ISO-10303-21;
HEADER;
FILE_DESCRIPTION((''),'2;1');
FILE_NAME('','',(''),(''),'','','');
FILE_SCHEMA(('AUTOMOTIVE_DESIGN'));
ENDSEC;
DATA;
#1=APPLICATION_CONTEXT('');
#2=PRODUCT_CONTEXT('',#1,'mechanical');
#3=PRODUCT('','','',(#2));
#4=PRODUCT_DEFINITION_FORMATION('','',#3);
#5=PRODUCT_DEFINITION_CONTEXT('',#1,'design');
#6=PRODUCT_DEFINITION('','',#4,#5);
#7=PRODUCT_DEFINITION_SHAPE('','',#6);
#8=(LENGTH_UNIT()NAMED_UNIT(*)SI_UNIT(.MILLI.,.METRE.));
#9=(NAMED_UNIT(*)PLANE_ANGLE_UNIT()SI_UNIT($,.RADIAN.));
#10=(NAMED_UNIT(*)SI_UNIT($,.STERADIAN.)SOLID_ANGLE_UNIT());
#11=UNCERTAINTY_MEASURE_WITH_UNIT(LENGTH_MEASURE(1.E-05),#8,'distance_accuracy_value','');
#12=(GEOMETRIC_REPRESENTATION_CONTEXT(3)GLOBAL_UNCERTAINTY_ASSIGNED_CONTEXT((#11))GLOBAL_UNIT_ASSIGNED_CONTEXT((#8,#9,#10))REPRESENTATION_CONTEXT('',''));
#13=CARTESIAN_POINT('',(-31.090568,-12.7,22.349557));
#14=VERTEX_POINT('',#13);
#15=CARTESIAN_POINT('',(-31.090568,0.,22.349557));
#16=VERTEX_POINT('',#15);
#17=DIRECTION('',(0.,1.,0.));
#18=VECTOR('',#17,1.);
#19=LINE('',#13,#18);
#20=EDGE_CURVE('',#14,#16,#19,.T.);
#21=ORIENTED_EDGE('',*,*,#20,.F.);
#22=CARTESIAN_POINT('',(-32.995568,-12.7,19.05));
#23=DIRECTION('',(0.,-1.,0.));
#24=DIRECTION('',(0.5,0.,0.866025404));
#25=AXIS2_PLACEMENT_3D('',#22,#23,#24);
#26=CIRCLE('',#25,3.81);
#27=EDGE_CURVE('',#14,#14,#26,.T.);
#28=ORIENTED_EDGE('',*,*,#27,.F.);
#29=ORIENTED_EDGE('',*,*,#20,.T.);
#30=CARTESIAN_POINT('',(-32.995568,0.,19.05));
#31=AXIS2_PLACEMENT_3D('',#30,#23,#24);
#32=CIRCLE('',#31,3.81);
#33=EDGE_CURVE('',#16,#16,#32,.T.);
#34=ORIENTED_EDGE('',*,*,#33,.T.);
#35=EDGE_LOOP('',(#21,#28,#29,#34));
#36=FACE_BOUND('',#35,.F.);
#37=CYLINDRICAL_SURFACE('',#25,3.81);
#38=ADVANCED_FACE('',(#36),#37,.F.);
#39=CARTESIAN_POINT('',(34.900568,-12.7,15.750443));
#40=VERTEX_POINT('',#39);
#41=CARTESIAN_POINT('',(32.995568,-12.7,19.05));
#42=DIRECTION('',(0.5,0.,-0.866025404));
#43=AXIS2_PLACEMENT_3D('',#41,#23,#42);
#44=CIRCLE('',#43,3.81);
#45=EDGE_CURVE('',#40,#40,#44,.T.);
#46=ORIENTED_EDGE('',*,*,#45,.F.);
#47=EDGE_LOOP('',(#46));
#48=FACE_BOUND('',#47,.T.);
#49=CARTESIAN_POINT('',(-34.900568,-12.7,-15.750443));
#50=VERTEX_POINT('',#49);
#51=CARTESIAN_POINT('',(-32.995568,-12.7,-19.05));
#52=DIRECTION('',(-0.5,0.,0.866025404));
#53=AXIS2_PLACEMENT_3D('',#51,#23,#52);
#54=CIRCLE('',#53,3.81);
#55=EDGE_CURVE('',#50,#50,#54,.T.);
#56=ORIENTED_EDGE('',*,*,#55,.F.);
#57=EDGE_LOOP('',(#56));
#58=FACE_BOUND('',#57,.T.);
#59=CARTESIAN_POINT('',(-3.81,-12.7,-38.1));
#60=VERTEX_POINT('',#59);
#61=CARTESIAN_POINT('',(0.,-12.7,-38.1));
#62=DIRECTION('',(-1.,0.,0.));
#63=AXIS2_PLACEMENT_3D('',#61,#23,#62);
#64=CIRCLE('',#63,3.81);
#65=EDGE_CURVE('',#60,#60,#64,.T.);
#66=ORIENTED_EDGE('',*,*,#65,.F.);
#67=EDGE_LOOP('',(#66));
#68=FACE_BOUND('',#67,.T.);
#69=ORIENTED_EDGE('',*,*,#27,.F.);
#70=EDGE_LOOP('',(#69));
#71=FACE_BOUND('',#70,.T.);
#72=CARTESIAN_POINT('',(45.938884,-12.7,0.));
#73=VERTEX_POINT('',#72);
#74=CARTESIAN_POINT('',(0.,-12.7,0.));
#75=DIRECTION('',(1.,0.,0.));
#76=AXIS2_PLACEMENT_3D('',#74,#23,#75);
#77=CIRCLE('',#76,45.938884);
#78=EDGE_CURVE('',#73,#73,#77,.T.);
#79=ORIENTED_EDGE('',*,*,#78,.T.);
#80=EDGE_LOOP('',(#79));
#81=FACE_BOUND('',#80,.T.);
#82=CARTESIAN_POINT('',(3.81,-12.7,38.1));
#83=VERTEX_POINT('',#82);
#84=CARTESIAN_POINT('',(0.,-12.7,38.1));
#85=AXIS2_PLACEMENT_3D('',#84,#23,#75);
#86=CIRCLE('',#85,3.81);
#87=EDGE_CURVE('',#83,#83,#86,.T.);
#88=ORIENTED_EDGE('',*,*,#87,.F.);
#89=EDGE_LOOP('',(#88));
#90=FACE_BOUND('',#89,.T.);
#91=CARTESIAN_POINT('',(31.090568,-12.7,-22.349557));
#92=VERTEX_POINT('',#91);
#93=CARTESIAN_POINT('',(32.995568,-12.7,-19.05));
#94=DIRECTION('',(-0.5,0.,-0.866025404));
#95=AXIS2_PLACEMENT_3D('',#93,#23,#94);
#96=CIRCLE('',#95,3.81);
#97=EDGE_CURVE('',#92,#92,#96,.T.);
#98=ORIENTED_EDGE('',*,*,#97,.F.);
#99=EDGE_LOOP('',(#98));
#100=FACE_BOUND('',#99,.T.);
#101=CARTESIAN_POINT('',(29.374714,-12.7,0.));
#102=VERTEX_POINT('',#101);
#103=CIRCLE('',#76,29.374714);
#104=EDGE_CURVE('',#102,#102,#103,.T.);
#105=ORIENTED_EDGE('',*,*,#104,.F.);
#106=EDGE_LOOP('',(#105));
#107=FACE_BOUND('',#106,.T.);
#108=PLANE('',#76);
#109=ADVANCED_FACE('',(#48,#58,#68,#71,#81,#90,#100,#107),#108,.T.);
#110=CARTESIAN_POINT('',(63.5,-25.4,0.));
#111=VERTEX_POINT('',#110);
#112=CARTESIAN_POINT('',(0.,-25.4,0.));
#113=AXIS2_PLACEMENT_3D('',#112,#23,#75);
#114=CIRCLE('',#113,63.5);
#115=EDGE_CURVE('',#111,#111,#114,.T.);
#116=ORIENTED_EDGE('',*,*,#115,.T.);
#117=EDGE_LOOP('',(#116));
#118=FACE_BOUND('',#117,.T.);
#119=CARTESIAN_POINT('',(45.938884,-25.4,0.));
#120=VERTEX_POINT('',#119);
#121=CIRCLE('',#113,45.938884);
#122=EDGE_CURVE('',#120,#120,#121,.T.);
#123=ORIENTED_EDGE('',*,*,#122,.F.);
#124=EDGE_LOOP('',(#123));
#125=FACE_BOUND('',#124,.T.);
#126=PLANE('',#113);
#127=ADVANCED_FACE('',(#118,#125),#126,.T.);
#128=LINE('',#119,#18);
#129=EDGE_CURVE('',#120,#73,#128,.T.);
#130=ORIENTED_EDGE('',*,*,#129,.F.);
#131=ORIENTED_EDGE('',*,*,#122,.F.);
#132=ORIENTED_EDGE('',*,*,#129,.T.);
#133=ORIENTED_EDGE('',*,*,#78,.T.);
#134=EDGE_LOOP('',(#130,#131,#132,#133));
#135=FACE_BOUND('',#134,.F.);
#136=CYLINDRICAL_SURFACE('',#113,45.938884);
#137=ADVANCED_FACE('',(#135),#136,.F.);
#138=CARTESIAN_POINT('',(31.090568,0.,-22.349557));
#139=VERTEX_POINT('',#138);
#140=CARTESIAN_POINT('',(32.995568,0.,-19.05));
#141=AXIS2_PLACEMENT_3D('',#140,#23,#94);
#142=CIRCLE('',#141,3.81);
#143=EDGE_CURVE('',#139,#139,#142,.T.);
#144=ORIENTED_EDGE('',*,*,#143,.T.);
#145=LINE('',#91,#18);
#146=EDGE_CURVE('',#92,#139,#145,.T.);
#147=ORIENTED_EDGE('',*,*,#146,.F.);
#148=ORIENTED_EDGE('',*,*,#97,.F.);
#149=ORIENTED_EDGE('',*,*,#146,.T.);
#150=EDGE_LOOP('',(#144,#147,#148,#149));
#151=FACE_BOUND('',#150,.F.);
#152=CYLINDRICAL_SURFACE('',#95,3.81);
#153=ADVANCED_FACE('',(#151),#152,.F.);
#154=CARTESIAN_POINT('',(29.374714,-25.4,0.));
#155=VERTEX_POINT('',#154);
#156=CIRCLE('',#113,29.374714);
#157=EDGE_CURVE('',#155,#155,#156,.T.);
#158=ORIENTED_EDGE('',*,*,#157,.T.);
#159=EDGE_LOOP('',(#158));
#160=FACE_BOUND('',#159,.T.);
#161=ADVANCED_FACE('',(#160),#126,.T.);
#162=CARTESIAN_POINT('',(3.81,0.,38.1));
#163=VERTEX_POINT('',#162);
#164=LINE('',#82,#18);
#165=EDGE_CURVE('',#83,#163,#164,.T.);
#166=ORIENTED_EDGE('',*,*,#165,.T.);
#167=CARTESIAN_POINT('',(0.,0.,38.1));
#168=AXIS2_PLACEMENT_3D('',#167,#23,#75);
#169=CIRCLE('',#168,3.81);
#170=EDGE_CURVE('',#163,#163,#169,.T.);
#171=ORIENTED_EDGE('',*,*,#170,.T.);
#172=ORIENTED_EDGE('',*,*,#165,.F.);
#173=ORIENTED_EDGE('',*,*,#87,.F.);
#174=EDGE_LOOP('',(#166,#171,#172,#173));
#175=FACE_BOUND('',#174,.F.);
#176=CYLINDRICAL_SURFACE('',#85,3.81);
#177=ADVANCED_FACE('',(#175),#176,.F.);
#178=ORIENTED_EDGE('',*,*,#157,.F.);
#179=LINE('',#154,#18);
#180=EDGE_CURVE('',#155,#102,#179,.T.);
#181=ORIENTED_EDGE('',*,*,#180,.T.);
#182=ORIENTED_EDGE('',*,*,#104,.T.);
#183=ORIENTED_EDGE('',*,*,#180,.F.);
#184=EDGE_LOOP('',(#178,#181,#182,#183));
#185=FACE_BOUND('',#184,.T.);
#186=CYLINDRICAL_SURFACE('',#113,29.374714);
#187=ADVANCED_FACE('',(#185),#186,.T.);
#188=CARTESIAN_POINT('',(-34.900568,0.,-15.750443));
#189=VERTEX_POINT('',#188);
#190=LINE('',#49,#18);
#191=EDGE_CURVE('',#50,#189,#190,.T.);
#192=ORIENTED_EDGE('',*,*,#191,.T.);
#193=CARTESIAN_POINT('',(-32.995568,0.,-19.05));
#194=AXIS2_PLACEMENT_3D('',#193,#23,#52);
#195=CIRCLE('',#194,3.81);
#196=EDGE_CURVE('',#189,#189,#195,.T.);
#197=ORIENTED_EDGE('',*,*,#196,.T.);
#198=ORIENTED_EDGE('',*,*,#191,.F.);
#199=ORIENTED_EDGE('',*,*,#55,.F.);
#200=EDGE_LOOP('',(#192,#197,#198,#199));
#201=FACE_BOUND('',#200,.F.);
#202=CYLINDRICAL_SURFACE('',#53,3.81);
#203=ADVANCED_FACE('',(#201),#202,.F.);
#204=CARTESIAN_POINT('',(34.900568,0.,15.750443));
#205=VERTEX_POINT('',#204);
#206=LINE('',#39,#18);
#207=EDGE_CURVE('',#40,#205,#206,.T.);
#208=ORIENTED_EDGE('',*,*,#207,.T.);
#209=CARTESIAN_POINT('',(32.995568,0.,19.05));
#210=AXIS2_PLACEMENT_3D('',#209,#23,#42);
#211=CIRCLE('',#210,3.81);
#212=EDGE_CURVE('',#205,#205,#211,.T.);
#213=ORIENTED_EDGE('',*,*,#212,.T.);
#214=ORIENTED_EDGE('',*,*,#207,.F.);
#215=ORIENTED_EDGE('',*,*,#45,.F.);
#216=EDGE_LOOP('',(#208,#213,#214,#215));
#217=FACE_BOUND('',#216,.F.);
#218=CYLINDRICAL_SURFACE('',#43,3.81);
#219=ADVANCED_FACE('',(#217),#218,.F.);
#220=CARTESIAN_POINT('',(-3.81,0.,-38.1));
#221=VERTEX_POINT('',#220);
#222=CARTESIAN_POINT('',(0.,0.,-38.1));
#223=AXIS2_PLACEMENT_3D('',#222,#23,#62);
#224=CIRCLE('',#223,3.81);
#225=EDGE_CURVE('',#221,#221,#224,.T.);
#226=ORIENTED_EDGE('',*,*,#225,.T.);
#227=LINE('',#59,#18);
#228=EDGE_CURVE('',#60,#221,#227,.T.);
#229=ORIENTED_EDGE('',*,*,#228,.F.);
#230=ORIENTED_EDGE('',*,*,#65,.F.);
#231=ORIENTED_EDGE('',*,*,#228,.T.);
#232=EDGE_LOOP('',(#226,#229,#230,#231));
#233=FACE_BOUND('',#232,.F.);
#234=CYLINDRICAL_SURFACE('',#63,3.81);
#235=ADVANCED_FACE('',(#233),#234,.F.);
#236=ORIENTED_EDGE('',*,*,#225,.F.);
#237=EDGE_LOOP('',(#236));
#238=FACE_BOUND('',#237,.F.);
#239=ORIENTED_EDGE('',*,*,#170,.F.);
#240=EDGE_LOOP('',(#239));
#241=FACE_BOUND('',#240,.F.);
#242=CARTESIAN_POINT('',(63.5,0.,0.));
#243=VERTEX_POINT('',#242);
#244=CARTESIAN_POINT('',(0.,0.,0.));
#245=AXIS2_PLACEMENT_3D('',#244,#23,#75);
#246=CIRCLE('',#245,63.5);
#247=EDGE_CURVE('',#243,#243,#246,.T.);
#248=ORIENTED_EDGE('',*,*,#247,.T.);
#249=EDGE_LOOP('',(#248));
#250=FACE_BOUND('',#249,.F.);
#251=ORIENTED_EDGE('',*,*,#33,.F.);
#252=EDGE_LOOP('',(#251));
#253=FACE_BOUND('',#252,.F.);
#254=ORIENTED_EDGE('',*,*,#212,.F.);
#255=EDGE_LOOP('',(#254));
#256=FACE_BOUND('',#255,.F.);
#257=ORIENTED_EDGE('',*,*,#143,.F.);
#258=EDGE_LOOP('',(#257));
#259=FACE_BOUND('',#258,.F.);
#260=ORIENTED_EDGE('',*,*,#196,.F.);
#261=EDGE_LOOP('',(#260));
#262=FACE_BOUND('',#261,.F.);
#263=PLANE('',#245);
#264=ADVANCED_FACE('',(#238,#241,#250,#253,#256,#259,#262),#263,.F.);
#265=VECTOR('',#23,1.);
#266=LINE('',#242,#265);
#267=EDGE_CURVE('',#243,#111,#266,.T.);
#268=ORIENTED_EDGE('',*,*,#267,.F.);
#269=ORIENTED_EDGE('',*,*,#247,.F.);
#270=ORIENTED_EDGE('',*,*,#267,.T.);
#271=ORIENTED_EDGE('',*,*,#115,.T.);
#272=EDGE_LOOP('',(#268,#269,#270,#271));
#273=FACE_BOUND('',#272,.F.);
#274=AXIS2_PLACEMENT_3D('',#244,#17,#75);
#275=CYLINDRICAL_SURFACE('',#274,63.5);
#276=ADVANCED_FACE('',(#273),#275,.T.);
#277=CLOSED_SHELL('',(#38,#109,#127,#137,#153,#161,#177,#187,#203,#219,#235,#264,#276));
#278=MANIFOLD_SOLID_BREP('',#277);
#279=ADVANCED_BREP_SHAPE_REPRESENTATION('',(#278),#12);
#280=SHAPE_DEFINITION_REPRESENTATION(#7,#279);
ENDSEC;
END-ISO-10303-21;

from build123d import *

# Parameters (mm, degrees)
F0_R            = 63.5
F1_DEPTH        = 25.4
F2_R            = 45.938884012
F2_R_2          = 29.3747144419
F3_DEPTH        = 12.7
F4_R            = 3.81
F5_DEPTH        = 12.701
F5_COPIES_COUNT = 6


# Not quite as in the source:
# - a pattern or mirror of a feature is missing from the dataset's text; its kind, count and spacing are read off the source's solid


with BuildPart() as f1:
    # F0 (on Front) → F1 (new body)
    with BuildSketch(Plane.XZ):
        Circle(F0_R)
    extrude(amount=F1_DEPTH)

    # F2 (on face) → F3 (cut)
    with BuildSketch(Plane.XZ.offset(25.4)):
        Circle(F2_R)
        Circle(F2_R_2, mode=Mode.SUBTRACT)
    extrude(amount=-F3_DEPTH, mode=Mode.SUBTRACT)

    # F4 (on face) → F5 (cut, through all)
    with BuildSketch(Plane.XZ.offset(12.7)):
        with Locations((0, 38.1)):
            Circle(F4_R)
    f5 = extrude(amount=-F5_DEPTH, mode=Mode.SUBTRACT)

    # F5_copies: F5 ×6 about axis
    f5_copies_axis = Axis((0, 0, 0), (0, 1, 0))
    for i in range(1, F5_COPIES_COUNT):
        add(f5.rotate(f5_copies_axis, i * 360 / F5_COPIES_COUNT), mode=Mode.SUBTRACT)


solid = f1.part
